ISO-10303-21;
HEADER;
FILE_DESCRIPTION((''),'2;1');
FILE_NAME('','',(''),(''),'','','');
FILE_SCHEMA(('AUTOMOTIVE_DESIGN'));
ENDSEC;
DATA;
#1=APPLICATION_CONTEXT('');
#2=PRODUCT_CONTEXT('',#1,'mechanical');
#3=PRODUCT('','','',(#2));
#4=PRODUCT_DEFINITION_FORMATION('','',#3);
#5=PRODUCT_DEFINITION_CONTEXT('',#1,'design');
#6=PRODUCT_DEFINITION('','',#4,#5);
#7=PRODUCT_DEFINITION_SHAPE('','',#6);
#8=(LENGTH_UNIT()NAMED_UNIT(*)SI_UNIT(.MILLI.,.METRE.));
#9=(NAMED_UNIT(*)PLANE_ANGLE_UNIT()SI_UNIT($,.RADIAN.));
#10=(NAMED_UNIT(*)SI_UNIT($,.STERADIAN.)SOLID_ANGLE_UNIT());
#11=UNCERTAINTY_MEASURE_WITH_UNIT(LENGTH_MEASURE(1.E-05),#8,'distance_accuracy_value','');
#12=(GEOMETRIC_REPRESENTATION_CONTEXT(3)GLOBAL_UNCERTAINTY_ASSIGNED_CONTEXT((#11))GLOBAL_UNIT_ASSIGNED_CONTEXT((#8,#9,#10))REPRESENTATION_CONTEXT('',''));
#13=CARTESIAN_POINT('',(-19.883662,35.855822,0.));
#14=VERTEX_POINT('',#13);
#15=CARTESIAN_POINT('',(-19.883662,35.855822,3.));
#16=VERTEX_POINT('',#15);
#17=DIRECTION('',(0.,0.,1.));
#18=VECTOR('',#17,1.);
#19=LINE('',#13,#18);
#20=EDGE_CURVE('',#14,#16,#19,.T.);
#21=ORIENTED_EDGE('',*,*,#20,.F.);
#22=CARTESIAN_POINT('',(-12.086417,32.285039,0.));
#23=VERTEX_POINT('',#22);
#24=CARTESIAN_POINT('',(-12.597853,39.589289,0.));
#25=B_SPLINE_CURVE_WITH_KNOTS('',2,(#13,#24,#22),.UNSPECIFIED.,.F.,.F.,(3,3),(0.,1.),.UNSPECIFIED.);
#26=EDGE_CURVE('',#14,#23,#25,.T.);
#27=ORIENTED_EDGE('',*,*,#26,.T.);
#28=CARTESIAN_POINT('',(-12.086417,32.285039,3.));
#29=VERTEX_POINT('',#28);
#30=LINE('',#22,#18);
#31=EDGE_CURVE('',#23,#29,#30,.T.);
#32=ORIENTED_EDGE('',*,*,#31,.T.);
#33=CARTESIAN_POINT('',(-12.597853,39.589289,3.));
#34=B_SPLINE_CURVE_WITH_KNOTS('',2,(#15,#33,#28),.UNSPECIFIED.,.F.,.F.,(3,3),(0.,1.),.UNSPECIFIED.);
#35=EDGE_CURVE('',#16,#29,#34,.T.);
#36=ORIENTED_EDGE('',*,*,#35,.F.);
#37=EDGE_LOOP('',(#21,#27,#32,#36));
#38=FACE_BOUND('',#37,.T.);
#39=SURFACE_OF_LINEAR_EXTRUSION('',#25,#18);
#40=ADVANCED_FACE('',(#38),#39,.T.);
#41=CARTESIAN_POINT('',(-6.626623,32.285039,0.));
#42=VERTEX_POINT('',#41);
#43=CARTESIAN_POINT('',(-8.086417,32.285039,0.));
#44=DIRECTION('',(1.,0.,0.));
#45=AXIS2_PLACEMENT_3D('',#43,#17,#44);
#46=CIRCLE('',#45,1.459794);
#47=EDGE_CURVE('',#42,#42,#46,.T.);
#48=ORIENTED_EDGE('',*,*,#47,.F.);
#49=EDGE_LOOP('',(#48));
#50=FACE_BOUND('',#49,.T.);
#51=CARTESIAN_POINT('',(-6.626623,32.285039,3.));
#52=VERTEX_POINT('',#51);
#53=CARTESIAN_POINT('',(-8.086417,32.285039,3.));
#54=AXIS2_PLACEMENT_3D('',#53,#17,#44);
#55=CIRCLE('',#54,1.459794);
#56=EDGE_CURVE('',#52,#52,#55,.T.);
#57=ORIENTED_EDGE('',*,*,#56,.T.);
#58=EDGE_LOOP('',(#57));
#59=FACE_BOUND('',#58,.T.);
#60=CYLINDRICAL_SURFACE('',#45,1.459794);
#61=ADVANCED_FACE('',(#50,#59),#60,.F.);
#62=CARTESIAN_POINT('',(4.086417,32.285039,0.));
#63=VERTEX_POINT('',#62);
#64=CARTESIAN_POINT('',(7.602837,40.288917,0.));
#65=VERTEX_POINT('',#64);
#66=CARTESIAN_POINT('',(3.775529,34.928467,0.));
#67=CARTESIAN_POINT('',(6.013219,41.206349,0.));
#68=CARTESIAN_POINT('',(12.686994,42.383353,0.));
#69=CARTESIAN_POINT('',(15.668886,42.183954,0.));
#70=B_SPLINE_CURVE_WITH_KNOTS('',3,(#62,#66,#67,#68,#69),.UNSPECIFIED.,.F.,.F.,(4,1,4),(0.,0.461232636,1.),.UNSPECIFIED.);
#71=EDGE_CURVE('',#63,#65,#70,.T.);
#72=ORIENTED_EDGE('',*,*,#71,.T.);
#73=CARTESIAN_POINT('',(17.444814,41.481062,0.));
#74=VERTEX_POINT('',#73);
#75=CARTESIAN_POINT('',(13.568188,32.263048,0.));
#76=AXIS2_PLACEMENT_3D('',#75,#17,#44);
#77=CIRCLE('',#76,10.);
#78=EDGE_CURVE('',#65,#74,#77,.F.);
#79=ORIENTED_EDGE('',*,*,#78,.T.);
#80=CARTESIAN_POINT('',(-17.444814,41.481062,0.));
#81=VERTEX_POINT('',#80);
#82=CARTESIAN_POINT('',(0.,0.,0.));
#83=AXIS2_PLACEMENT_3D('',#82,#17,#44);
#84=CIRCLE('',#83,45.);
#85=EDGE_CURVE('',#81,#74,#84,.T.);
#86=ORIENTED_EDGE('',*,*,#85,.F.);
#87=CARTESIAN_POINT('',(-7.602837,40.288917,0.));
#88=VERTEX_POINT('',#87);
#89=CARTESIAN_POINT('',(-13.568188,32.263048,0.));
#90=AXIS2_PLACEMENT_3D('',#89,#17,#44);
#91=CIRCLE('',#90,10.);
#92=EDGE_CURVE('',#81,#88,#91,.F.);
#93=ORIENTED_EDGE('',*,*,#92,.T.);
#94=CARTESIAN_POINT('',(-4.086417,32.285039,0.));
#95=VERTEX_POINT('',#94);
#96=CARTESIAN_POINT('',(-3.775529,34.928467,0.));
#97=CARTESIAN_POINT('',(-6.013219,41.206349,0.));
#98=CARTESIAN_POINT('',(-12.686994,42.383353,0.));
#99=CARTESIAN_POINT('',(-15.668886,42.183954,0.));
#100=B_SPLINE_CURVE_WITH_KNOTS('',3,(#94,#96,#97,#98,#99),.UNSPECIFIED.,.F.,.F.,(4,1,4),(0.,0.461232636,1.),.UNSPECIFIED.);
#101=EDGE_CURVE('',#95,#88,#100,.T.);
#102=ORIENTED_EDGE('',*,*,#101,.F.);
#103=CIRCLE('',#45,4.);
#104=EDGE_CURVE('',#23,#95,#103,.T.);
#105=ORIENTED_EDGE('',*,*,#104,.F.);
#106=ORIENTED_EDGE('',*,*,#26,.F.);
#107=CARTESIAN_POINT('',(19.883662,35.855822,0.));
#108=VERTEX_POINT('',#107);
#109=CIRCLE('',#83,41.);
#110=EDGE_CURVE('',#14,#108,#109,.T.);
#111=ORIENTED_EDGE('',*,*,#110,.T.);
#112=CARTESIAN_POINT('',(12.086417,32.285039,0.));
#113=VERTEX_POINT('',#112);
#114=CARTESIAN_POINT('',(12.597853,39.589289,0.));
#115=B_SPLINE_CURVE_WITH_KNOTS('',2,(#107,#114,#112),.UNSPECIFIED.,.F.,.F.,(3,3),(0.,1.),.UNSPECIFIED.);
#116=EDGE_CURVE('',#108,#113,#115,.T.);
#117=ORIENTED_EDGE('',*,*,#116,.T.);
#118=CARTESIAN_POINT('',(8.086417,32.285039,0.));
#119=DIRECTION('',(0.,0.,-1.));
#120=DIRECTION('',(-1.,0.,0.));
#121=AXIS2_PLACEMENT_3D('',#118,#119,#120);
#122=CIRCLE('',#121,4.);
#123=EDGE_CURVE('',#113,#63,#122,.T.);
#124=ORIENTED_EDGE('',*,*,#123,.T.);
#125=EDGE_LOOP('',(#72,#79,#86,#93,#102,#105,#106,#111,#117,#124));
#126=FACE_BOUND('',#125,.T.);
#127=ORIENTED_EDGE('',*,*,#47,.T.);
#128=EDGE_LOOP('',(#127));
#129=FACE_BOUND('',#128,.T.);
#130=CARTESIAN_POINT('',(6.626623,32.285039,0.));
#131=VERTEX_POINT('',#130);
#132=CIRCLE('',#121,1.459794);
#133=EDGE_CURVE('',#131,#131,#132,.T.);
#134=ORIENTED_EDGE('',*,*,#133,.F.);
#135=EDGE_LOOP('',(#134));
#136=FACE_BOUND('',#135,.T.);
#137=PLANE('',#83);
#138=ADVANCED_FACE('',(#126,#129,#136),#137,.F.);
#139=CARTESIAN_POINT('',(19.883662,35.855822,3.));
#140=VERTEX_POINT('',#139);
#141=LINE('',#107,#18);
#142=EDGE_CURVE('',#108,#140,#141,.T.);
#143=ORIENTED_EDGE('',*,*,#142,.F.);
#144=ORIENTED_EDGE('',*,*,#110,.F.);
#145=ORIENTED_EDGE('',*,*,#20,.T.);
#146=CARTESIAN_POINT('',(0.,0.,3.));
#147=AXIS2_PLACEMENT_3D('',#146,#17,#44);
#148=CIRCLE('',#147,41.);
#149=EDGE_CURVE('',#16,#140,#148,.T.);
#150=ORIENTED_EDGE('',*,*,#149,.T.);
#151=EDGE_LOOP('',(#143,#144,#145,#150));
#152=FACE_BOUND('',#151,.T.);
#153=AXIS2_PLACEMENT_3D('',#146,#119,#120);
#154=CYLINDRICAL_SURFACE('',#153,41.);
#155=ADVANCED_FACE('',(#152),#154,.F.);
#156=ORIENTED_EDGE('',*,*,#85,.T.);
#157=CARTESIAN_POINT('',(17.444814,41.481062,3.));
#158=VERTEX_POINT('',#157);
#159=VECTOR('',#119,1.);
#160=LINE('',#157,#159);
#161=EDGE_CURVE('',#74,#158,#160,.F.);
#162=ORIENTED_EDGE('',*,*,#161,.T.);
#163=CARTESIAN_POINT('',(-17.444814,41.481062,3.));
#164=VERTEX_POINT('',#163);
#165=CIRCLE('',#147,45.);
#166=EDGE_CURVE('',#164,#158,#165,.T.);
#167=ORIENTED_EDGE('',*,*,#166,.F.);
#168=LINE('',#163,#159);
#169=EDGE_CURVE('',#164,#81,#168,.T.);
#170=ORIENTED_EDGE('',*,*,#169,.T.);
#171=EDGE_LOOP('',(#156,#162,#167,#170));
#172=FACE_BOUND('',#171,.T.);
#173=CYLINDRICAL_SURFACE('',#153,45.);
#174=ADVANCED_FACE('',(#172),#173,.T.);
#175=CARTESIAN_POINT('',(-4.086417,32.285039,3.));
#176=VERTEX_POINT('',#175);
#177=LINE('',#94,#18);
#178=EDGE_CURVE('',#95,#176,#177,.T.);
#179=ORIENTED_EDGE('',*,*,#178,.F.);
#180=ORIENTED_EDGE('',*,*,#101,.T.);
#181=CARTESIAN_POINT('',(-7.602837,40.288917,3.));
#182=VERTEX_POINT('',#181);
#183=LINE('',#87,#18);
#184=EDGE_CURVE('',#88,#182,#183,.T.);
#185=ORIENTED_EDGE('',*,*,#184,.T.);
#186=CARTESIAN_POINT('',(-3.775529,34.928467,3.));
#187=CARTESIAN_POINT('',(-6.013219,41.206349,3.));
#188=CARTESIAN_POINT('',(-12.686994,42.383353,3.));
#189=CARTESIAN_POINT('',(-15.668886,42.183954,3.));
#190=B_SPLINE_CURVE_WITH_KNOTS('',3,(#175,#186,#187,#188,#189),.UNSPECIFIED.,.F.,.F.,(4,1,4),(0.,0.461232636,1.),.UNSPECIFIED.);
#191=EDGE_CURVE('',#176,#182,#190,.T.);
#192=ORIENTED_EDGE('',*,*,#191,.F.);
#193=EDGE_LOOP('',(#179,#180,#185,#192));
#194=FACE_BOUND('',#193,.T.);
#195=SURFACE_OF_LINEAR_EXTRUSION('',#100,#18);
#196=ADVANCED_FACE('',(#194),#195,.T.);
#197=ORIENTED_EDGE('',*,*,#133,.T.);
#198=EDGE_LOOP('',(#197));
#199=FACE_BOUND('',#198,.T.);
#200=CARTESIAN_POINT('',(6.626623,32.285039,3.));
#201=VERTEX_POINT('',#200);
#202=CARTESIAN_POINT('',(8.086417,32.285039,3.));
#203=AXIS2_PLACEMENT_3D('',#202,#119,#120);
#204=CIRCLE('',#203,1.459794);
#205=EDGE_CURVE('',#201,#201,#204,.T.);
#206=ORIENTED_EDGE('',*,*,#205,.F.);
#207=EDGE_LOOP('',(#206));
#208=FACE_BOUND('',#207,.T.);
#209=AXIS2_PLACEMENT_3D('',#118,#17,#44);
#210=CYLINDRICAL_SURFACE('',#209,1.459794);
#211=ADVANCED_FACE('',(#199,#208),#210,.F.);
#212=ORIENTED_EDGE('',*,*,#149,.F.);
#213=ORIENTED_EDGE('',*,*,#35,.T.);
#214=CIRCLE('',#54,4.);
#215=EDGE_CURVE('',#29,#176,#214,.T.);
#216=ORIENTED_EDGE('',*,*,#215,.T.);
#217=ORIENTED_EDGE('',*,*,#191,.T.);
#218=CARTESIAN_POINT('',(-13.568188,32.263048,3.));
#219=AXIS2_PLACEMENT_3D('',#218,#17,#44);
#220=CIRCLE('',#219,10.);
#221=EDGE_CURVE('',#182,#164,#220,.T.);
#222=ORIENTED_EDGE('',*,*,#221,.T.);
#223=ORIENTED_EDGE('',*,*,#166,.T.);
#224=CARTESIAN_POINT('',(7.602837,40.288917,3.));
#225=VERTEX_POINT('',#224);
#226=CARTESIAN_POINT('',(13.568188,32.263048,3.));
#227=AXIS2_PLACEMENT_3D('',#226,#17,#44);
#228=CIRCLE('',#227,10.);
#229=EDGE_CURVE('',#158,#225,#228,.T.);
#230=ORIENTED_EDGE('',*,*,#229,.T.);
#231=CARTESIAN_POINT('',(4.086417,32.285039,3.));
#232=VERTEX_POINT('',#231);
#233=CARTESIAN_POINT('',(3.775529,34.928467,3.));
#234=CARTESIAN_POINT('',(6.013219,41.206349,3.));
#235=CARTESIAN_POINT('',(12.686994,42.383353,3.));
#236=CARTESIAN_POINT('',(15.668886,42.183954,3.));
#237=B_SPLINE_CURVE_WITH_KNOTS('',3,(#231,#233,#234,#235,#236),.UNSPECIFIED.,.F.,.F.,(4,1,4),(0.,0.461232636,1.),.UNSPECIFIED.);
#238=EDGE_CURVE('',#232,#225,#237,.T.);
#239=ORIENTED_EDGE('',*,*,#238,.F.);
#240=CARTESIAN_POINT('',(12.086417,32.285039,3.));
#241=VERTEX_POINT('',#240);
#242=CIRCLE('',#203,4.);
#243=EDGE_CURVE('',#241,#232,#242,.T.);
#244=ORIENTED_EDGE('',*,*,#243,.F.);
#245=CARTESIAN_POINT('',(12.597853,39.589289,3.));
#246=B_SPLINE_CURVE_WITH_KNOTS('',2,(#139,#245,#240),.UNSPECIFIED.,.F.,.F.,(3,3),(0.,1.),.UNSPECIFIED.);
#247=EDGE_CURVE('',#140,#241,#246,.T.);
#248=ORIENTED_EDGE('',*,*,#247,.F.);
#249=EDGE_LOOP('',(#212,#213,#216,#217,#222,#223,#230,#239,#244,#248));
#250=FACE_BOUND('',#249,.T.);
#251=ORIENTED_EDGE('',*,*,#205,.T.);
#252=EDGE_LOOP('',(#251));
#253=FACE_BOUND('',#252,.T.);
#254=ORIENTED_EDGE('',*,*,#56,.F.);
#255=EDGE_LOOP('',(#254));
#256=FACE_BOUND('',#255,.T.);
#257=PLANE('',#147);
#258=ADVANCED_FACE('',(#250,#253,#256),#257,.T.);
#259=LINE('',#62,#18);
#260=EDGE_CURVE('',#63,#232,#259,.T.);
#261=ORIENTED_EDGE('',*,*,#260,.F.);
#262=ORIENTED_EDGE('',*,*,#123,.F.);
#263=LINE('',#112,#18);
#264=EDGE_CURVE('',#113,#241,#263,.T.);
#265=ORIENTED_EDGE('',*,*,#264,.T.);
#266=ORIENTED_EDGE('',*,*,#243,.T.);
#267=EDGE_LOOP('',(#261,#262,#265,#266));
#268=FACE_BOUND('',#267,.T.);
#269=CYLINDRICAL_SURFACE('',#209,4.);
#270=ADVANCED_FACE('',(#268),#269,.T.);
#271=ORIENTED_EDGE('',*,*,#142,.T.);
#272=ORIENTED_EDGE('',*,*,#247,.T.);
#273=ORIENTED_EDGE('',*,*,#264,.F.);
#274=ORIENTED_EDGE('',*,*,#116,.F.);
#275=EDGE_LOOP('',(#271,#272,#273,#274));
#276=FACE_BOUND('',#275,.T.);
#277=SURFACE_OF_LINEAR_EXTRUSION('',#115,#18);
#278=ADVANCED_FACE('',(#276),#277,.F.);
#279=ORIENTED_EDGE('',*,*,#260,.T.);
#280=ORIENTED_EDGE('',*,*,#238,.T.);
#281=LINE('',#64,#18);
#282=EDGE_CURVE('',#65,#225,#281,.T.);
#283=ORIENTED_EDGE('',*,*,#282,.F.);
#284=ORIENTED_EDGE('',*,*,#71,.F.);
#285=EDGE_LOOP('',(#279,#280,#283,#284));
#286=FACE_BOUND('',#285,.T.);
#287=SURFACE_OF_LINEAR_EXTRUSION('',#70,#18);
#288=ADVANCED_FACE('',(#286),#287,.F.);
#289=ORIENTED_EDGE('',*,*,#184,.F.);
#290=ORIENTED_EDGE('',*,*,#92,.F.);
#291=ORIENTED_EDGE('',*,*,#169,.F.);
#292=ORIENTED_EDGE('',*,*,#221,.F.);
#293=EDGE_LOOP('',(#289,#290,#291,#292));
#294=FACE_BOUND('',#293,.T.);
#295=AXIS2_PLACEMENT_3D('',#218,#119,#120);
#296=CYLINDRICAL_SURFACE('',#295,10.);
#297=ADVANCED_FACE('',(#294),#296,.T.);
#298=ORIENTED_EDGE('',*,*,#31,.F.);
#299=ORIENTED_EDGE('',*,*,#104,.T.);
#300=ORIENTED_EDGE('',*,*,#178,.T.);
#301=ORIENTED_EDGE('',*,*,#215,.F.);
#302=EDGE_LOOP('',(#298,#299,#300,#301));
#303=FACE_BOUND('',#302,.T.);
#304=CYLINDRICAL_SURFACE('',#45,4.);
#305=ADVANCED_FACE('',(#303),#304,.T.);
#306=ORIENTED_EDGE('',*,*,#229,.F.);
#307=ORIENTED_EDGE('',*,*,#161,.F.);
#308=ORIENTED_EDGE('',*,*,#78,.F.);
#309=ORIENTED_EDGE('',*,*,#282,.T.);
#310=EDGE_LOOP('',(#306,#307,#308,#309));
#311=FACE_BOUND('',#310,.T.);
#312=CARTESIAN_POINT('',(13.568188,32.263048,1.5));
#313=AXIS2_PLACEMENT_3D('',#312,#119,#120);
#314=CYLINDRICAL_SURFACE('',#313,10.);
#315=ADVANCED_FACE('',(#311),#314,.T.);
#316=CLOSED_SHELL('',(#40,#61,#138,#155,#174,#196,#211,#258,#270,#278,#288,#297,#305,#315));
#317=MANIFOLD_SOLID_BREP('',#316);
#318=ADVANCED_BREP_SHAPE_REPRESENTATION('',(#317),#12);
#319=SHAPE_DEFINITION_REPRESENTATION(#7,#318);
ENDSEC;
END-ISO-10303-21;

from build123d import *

# Parameters (mm, degrees)
SKETCH1_R            = 45
SKETCH1_R_2          = 41
BOSS_EXTRUDE1_DEPTH  = 3
SKETCH2_R            = 1.459793725
BOSS_EXTRUDE2_DEPTH  = 3
CUT_EXTRUDE1_DEPTH   = 3
FILLET1_R            = 10
FILLET1_OF_MIRROR1_R = 10


with BuildPart() as part:
    # Sketch1 → Boss-Extrude1 (new body)
    with BuildSketch(Plane.XY):
        Circle(SKETCH1_R)
        Circle(SKETCH1_R_2, mode=Mode.SUBTRACT)
    extrude(amount=BOSS_EXTRUDE1_DEPTH)

    # Sketch2 → Boss-Extrude2 (add)
    with BuildSketch(Plane.XY.offset(3)):
        with BuildLine():
            Line((-15.668886268, 42.183954332), (-19.883661907, 35.855822249))
            add(Edge.make_bspline(
                [(-12.086416771, 32.285039051), (-12.597852714, 39.589288788), (-19.883661907, 35.855822249)],
                knots=[0, 0, 0, 1, 1, 1], degree=2))
            ThreePointArc((-12.086416771, 32.285039051), (-8.086416771, 28.285039051), (-4.086416771, 32.285039051))
            add(Edge.make_bspline(
                [(-4.086416771, 32.285039051), (-3.775529113, 34.928467106), (-6.013218517, 41.206349148), (-12.686993609, 42.383352938), (-15.668886268, 42.183954332)],
                knots=[0, 0, 0, 0, 0.461232636, 1, 1, 1, 1], degree=3))
        make_face()
        with Locations((-8.086416771, 32.285039051)):
            Circle(SKETCH2_R, mode=Mode.SUBTRACT)
    boss_extrude2 = extrude(amount=-BOSS_EXTRUDE2_DEPTH)

    # Sketch3 → Cut-Extrude1 (cut)
    with BuildSketch(Plane.XY.offset(3)):
        Polygon((0, 45), (0, 37.437139849), (-7.602836832, 40.288917485), (-11.716734304, 43.447878398), (-6.589372727, 48.458841459), align=None)
    cut_extrude1 = extrude(amount=-CUT_EXTRUDE1_DEPTH, mode=Mode.SUBTRACT)

    # Fillet1
    # the kernel refuses this fillet: 10 mm, written as the material it takes off along each edge
    with BuildSketch(Plane(origin=(-11.716734304, 43.447878398, 18.140851252), x_dir=(-0.9457987516283185, -0.32475332395268036, 0), z_dir=(0, 0, -1))) as fillet1_piece_1:
        with BuildLine():
            CenterArc((5.383413779, -9.977332791), FILLET1_R, 86.141498066, 59.431279914)
            Line((-2.865036036, -4.323743166), (-3.030005033, -4.210671374))
            ThreePointArc((-3.030005033, -4.210671374), (-1.599238142, -2.051398055), (-0.166720124, 0.110473528))
            Line((-0.166720124, 0.110473528), (-0.013458534, 0.199546656))
            ThreePointArc((-0.013458534, 0.199546656), (3.02817025, 0.30200244), (6.069799035, 0.199546656))
            Line((6.069799035, 0.199546656), (6.056340501, 0))
        make_face()
    extrude(amount=33.281702504, mode=Mode.SUBTRACT)

    # Mirror1: Boss-Extrude2, Cut-Extrude1 across plane
    add(boss_extrude2.mirror(Plane(origin=(0, 0, 0), x_dir=(0, 0, 1), z_dir=(1, 0, 0))))
    add(cut_extrude1.mirror(Plane(origin=(0, 0, 0), x_dir=(0, 0, 1), z_dir=(1, 0, 0))), mode=Mode.SUBTRACT)

    # Fillet1 of Mirror1
    # the kernel refuses this fillet: 10 mm, written as the material it takes off along each edge
    with BuildSketch(Plane(origin=(11.716734304, 43.447878398, 18.140851252), x_dir=(0.9457987516283181, -0.324753323952681, 0), z_dir=(0, 0, -1))) as fillet1_of_mirror1_piece_1:
        with BuildLine():
            CenterArc((5.383413779, 9.977332791), FILLET1_OF_MIRROR1_R, 214.42722202, 59.431279914)
            Line((-2.865036036, 4.323743166), (-3.030005033, 4.210671374))
            ThreePointArc((-3.030005033, 4.210671374), (-1.599238142, 2.051398055), (-0.166720124, -0.110473528))
            Line((-0.166720124, -0.110473528), (-0.013458534, -0.199546656))
            ThreePointArc((-0.013458534, -0.199546656), (3.02817025, -0.30200244), (6.069799035, -0.199546656))
            Line((6.069799035, -0.199546656), (6.056340501, 0))
        make_face()
    extrude(amount=33.281702504, mode=Mode.SUBTRACT)


solid = part.part
